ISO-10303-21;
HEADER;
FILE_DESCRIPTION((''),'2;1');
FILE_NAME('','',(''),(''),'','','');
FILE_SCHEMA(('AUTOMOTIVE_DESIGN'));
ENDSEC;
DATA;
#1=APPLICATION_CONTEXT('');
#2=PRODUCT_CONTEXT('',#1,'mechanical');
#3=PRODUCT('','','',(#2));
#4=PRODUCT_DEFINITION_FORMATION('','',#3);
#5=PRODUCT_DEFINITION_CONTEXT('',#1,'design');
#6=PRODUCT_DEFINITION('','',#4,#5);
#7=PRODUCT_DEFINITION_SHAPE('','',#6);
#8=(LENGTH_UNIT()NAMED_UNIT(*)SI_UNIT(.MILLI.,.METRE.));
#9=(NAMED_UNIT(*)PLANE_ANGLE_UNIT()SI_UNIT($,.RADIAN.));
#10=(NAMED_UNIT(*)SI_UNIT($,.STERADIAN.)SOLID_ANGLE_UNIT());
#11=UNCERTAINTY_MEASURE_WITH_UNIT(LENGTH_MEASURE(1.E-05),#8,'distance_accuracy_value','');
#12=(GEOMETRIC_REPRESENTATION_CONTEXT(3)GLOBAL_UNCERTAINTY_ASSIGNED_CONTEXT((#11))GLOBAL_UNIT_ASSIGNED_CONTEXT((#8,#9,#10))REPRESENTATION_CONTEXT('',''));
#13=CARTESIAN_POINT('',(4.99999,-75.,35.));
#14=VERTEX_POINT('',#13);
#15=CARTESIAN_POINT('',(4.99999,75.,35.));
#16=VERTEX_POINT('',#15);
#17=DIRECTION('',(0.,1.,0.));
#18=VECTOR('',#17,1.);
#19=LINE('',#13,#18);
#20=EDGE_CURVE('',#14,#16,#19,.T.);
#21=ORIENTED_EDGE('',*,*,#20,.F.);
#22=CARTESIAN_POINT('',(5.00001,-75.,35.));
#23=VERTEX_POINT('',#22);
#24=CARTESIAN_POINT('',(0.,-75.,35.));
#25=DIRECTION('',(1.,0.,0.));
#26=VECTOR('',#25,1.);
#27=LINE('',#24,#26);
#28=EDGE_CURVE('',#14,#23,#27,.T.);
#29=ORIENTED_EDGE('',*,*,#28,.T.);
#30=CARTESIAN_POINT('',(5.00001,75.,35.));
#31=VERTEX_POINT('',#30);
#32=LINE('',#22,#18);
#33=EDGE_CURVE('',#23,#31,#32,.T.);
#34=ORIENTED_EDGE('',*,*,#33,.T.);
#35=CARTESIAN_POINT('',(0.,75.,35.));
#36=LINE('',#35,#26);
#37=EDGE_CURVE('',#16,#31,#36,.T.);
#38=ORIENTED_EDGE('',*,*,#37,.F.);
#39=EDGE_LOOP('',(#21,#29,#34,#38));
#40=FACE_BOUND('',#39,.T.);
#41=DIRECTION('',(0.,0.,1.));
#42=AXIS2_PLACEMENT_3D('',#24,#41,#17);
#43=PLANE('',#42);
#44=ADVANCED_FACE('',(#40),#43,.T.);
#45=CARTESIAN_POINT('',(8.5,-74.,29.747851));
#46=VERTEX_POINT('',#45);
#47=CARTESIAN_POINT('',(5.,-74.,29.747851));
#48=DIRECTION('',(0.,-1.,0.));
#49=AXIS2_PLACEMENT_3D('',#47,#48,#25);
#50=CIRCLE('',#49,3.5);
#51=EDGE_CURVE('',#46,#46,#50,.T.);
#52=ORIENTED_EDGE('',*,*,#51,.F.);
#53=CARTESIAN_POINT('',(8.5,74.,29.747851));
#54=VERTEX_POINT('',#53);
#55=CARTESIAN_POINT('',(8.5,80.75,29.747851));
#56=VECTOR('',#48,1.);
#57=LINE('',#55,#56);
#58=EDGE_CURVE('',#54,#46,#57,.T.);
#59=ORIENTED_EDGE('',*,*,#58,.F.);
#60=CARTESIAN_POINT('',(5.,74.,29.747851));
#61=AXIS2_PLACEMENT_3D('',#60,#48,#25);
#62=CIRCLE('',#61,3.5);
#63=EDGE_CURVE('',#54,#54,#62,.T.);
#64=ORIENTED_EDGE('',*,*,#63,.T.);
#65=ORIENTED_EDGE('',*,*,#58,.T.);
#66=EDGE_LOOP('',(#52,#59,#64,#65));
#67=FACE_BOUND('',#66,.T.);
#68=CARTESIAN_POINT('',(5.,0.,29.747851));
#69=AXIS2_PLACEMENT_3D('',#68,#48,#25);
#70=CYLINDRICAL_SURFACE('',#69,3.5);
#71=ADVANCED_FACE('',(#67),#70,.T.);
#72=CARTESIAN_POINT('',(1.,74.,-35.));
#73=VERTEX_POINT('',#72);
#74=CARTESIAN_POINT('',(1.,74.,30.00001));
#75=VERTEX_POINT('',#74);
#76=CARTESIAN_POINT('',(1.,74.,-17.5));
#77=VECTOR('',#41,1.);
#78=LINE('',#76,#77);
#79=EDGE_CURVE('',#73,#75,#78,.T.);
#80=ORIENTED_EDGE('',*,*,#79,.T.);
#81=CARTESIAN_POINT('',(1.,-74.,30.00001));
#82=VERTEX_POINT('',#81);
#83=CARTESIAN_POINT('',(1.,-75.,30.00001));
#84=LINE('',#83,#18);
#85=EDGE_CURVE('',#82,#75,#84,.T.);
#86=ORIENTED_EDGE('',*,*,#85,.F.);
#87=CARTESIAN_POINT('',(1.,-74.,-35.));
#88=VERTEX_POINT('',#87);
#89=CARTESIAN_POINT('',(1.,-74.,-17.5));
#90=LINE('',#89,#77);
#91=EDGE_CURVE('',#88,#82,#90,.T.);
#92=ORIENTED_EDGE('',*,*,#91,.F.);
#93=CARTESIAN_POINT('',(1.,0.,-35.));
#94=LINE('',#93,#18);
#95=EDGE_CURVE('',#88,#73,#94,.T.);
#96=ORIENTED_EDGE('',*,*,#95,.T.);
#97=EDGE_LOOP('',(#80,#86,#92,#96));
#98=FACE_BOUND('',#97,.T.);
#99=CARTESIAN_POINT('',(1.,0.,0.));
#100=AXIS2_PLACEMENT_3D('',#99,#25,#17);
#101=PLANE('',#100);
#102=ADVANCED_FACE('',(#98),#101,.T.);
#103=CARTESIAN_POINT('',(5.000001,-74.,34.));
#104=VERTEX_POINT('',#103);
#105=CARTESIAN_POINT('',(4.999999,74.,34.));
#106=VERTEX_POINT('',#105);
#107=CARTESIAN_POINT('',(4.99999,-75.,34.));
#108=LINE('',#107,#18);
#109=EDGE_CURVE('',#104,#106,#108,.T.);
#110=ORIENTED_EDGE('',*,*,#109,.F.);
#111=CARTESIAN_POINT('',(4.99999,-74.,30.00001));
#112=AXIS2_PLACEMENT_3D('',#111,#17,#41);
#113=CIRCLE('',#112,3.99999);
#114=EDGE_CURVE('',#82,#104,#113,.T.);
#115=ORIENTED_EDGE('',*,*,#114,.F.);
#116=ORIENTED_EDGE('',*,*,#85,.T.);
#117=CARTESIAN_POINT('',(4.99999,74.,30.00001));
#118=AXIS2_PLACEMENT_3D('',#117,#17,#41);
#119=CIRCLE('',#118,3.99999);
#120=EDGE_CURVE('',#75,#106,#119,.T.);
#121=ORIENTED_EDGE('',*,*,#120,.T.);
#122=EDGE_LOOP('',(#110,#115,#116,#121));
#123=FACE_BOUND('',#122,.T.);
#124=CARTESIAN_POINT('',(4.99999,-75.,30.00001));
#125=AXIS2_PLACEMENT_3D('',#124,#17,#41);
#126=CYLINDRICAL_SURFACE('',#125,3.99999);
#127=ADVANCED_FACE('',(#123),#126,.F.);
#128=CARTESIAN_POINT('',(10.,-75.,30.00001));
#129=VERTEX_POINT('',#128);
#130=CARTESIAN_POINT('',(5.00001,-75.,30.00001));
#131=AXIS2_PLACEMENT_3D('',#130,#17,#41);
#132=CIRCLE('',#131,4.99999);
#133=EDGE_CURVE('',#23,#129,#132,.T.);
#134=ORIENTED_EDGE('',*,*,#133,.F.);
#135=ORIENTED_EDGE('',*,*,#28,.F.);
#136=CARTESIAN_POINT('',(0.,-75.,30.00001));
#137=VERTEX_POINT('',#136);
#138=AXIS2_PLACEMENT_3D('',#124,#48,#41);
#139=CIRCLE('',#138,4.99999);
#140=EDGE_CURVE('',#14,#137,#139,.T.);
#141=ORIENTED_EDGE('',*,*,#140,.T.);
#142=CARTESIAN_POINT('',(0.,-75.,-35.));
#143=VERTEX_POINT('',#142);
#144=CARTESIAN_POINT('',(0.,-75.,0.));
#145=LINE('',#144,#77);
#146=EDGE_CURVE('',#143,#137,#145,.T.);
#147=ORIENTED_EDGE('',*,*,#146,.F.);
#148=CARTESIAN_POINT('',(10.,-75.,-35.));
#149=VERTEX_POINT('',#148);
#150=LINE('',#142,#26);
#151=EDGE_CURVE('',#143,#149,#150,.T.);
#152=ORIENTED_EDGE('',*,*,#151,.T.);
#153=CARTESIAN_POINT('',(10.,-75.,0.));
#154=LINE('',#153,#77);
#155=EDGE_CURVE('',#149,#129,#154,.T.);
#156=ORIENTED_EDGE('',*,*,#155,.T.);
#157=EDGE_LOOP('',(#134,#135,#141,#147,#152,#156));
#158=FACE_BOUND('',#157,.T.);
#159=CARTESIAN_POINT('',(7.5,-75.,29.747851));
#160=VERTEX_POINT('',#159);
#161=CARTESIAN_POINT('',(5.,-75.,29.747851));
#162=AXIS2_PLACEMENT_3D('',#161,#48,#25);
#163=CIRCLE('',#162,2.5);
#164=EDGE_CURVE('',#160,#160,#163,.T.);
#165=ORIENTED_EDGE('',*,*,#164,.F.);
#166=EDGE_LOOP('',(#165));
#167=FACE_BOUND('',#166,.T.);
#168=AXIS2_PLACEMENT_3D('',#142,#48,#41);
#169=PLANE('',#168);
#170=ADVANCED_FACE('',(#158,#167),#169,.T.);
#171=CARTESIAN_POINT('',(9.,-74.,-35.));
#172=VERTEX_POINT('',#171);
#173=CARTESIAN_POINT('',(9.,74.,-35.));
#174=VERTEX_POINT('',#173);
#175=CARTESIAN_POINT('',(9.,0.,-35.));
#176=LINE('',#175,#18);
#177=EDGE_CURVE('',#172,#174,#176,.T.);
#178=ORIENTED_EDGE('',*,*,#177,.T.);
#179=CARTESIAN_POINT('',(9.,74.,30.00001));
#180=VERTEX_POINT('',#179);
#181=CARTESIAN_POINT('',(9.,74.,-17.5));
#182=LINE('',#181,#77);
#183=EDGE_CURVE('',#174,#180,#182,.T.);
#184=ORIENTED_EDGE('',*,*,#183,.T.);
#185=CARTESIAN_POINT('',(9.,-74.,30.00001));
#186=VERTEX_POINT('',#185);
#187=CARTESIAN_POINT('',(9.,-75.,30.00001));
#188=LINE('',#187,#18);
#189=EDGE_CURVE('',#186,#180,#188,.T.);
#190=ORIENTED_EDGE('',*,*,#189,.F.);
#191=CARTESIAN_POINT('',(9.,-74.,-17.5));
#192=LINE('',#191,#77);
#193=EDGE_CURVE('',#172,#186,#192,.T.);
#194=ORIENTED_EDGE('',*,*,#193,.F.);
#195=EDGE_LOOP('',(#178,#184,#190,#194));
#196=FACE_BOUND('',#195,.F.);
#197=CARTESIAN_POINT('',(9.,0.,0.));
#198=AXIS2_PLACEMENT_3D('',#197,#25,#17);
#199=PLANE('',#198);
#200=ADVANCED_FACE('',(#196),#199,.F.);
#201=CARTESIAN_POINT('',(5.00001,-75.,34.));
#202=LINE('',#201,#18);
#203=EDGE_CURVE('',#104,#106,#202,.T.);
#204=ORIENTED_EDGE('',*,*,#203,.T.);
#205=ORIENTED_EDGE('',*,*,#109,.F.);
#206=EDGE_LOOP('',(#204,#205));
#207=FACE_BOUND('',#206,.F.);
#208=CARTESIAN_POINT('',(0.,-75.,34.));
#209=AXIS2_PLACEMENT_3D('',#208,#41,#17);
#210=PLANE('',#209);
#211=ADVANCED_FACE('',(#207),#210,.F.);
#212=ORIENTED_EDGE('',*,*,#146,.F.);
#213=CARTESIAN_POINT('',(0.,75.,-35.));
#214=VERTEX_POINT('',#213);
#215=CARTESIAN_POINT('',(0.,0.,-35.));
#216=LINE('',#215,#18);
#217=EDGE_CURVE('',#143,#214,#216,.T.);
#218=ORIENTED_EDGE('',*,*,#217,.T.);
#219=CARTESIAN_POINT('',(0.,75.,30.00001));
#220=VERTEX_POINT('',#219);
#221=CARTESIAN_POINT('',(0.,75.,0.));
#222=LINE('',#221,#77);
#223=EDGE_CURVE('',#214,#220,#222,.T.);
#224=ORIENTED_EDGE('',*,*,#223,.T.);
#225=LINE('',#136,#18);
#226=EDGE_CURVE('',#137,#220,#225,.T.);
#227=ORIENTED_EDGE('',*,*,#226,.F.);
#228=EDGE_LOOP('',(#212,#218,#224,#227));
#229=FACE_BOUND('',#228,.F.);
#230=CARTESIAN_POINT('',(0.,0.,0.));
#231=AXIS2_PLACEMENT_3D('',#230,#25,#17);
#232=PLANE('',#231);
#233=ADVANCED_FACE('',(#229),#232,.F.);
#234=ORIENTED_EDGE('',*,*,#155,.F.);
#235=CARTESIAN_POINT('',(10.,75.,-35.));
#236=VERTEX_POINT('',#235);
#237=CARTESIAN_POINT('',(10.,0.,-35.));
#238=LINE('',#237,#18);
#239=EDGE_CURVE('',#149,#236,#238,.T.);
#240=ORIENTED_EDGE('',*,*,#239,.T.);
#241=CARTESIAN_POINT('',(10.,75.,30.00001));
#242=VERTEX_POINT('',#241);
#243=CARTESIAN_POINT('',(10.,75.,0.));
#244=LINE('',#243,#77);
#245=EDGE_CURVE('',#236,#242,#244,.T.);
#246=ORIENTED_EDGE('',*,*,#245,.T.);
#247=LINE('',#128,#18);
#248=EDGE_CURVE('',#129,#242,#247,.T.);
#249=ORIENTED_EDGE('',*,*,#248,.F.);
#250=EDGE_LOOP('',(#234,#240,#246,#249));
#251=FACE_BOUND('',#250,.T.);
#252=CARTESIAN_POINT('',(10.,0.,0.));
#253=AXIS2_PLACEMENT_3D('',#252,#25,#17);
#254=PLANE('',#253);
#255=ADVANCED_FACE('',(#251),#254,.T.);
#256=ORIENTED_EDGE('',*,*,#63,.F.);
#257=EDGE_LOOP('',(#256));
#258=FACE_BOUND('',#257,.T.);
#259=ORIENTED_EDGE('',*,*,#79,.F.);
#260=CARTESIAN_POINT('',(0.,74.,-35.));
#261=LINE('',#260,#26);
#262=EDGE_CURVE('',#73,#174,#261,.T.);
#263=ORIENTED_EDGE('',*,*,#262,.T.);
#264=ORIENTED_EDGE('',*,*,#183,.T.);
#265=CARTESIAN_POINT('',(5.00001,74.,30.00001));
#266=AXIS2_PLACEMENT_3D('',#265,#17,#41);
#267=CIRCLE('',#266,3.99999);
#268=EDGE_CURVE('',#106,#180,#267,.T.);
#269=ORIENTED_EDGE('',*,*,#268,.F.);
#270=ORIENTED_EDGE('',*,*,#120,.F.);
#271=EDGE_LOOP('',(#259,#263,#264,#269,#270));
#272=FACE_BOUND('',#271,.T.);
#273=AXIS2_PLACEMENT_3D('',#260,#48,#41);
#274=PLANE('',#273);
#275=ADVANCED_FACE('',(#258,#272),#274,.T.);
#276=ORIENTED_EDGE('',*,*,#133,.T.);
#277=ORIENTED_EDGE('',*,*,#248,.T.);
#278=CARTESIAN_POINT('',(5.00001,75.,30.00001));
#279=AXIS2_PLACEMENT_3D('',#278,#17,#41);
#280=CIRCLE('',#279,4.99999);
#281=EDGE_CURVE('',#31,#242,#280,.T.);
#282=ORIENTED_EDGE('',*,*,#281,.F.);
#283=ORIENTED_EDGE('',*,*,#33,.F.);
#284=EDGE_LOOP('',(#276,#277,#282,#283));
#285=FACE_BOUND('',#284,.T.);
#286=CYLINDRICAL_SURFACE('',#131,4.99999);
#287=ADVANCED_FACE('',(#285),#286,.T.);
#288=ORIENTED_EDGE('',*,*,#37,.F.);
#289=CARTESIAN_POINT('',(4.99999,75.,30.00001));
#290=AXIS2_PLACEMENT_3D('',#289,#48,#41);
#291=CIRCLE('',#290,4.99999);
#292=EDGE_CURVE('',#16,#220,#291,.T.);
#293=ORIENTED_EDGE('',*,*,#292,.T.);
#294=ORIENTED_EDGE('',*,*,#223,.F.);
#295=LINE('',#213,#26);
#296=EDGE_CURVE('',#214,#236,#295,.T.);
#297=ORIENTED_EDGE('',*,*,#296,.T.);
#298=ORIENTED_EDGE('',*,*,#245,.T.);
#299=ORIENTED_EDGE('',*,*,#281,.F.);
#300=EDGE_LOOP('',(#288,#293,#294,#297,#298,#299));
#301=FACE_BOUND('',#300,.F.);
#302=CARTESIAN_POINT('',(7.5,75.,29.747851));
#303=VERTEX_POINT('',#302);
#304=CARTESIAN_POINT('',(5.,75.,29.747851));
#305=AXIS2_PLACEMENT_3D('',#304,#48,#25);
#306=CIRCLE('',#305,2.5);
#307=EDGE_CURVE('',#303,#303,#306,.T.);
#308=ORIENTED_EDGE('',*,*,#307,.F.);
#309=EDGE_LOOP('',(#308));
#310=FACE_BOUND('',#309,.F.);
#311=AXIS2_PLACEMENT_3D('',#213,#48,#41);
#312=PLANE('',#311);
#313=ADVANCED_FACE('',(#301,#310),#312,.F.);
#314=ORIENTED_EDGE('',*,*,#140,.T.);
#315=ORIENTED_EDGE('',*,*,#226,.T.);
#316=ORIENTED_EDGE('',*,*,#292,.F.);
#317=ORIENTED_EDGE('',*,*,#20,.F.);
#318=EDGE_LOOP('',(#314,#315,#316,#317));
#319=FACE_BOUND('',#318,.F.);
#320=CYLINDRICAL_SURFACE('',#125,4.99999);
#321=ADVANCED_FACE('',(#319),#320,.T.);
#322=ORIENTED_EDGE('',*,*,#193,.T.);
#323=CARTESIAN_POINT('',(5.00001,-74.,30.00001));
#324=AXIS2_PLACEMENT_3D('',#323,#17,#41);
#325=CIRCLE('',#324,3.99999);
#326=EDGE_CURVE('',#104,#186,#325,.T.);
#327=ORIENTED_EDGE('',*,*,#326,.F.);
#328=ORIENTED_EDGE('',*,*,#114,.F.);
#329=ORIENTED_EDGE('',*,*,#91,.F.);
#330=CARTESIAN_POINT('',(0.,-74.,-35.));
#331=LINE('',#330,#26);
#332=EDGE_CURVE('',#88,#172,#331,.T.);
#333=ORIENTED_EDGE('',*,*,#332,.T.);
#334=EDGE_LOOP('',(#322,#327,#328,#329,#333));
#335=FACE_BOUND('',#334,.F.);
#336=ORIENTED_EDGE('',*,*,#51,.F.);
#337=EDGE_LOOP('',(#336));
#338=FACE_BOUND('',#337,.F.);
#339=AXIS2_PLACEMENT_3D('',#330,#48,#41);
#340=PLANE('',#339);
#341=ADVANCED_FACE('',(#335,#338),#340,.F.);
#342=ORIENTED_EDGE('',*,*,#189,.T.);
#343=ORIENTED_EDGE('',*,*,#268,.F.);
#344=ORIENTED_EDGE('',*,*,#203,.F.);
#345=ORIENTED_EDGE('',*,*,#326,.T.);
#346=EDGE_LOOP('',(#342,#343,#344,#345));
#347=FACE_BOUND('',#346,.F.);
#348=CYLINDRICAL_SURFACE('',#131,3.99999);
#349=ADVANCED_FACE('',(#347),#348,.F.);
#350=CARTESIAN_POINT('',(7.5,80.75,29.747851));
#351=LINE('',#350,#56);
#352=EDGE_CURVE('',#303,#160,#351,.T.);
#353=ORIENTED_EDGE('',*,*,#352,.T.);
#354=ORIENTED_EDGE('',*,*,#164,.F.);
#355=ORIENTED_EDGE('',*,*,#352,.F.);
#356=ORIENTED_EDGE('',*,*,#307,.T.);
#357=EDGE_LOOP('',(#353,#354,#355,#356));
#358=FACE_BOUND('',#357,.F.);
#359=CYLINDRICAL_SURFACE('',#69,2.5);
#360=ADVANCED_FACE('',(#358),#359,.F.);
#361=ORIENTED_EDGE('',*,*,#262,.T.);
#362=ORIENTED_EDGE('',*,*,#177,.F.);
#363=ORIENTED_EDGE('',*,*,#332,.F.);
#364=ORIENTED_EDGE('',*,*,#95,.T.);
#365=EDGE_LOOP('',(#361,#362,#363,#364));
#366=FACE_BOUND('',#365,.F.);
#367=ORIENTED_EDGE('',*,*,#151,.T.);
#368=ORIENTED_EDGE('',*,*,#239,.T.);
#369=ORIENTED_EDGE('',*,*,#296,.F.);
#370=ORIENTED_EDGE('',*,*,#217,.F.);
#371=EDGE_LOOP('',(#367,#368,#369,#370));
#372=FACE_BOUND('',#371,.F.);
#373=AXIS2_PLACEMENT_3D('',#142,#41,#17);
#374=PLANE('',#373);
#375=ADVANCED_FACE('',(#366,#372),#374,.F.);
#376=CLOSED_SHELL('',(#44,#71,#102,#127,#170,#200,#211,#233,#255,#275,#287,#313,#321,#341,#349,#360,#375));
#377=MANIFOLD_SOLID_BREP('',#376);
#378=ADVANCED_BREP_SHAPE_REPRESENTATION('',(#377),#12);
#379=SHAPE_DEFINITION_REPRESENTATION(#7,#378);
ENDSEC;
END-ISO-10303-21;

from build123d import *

# Parameters (mm, degrees)
F0_W     = 150
F0_H     = 70
F1_DEPTH = 10
F2_R     = 4.99999
F3_R     = 2.5
F4_DEPTH = 80.75
F5_T     = -1


# Not quite as in the source:
# - a fillet or chamfer is up to 0.001 mm smaller than in the source, because OpenCascade refuses the exact size


with BuildPart() as f1:
    # F0 (on Right) → F1 (new body)
    with BuildSketch(Plane.YZ):
        Rectangle(F0_W, F0_H)
    extrude(amount=F1_DEPTH)

    # F2 (radius 5 in the source; OpenCascade refuses exactly that, so slightly less here)
    f2_edges = [f1.edges().sort_by_distance(p)[0] for p in [
        (10, 0, 35),
        (0, 0, 35),
    ]]
    fillet(f2_edges, radius=F2_R)

    # F3 (on Front) → F4 (cut, symmetric)
    with BuildSketch(Plane.XZ):
        with Locations((5, 29.747851193)):
            Circle(F3_R)
    extrude(amount=F4_DEPTH, both=True, mode=Mode.SUBTRACT)

    # F5
    f5_openings = [f1.faces().sort_by_distance(p)[0] for p in [
        (5, 0, -35),
    ]]
    offset(amount=F5_T, openings=f5_openings)


solid = f1.part
